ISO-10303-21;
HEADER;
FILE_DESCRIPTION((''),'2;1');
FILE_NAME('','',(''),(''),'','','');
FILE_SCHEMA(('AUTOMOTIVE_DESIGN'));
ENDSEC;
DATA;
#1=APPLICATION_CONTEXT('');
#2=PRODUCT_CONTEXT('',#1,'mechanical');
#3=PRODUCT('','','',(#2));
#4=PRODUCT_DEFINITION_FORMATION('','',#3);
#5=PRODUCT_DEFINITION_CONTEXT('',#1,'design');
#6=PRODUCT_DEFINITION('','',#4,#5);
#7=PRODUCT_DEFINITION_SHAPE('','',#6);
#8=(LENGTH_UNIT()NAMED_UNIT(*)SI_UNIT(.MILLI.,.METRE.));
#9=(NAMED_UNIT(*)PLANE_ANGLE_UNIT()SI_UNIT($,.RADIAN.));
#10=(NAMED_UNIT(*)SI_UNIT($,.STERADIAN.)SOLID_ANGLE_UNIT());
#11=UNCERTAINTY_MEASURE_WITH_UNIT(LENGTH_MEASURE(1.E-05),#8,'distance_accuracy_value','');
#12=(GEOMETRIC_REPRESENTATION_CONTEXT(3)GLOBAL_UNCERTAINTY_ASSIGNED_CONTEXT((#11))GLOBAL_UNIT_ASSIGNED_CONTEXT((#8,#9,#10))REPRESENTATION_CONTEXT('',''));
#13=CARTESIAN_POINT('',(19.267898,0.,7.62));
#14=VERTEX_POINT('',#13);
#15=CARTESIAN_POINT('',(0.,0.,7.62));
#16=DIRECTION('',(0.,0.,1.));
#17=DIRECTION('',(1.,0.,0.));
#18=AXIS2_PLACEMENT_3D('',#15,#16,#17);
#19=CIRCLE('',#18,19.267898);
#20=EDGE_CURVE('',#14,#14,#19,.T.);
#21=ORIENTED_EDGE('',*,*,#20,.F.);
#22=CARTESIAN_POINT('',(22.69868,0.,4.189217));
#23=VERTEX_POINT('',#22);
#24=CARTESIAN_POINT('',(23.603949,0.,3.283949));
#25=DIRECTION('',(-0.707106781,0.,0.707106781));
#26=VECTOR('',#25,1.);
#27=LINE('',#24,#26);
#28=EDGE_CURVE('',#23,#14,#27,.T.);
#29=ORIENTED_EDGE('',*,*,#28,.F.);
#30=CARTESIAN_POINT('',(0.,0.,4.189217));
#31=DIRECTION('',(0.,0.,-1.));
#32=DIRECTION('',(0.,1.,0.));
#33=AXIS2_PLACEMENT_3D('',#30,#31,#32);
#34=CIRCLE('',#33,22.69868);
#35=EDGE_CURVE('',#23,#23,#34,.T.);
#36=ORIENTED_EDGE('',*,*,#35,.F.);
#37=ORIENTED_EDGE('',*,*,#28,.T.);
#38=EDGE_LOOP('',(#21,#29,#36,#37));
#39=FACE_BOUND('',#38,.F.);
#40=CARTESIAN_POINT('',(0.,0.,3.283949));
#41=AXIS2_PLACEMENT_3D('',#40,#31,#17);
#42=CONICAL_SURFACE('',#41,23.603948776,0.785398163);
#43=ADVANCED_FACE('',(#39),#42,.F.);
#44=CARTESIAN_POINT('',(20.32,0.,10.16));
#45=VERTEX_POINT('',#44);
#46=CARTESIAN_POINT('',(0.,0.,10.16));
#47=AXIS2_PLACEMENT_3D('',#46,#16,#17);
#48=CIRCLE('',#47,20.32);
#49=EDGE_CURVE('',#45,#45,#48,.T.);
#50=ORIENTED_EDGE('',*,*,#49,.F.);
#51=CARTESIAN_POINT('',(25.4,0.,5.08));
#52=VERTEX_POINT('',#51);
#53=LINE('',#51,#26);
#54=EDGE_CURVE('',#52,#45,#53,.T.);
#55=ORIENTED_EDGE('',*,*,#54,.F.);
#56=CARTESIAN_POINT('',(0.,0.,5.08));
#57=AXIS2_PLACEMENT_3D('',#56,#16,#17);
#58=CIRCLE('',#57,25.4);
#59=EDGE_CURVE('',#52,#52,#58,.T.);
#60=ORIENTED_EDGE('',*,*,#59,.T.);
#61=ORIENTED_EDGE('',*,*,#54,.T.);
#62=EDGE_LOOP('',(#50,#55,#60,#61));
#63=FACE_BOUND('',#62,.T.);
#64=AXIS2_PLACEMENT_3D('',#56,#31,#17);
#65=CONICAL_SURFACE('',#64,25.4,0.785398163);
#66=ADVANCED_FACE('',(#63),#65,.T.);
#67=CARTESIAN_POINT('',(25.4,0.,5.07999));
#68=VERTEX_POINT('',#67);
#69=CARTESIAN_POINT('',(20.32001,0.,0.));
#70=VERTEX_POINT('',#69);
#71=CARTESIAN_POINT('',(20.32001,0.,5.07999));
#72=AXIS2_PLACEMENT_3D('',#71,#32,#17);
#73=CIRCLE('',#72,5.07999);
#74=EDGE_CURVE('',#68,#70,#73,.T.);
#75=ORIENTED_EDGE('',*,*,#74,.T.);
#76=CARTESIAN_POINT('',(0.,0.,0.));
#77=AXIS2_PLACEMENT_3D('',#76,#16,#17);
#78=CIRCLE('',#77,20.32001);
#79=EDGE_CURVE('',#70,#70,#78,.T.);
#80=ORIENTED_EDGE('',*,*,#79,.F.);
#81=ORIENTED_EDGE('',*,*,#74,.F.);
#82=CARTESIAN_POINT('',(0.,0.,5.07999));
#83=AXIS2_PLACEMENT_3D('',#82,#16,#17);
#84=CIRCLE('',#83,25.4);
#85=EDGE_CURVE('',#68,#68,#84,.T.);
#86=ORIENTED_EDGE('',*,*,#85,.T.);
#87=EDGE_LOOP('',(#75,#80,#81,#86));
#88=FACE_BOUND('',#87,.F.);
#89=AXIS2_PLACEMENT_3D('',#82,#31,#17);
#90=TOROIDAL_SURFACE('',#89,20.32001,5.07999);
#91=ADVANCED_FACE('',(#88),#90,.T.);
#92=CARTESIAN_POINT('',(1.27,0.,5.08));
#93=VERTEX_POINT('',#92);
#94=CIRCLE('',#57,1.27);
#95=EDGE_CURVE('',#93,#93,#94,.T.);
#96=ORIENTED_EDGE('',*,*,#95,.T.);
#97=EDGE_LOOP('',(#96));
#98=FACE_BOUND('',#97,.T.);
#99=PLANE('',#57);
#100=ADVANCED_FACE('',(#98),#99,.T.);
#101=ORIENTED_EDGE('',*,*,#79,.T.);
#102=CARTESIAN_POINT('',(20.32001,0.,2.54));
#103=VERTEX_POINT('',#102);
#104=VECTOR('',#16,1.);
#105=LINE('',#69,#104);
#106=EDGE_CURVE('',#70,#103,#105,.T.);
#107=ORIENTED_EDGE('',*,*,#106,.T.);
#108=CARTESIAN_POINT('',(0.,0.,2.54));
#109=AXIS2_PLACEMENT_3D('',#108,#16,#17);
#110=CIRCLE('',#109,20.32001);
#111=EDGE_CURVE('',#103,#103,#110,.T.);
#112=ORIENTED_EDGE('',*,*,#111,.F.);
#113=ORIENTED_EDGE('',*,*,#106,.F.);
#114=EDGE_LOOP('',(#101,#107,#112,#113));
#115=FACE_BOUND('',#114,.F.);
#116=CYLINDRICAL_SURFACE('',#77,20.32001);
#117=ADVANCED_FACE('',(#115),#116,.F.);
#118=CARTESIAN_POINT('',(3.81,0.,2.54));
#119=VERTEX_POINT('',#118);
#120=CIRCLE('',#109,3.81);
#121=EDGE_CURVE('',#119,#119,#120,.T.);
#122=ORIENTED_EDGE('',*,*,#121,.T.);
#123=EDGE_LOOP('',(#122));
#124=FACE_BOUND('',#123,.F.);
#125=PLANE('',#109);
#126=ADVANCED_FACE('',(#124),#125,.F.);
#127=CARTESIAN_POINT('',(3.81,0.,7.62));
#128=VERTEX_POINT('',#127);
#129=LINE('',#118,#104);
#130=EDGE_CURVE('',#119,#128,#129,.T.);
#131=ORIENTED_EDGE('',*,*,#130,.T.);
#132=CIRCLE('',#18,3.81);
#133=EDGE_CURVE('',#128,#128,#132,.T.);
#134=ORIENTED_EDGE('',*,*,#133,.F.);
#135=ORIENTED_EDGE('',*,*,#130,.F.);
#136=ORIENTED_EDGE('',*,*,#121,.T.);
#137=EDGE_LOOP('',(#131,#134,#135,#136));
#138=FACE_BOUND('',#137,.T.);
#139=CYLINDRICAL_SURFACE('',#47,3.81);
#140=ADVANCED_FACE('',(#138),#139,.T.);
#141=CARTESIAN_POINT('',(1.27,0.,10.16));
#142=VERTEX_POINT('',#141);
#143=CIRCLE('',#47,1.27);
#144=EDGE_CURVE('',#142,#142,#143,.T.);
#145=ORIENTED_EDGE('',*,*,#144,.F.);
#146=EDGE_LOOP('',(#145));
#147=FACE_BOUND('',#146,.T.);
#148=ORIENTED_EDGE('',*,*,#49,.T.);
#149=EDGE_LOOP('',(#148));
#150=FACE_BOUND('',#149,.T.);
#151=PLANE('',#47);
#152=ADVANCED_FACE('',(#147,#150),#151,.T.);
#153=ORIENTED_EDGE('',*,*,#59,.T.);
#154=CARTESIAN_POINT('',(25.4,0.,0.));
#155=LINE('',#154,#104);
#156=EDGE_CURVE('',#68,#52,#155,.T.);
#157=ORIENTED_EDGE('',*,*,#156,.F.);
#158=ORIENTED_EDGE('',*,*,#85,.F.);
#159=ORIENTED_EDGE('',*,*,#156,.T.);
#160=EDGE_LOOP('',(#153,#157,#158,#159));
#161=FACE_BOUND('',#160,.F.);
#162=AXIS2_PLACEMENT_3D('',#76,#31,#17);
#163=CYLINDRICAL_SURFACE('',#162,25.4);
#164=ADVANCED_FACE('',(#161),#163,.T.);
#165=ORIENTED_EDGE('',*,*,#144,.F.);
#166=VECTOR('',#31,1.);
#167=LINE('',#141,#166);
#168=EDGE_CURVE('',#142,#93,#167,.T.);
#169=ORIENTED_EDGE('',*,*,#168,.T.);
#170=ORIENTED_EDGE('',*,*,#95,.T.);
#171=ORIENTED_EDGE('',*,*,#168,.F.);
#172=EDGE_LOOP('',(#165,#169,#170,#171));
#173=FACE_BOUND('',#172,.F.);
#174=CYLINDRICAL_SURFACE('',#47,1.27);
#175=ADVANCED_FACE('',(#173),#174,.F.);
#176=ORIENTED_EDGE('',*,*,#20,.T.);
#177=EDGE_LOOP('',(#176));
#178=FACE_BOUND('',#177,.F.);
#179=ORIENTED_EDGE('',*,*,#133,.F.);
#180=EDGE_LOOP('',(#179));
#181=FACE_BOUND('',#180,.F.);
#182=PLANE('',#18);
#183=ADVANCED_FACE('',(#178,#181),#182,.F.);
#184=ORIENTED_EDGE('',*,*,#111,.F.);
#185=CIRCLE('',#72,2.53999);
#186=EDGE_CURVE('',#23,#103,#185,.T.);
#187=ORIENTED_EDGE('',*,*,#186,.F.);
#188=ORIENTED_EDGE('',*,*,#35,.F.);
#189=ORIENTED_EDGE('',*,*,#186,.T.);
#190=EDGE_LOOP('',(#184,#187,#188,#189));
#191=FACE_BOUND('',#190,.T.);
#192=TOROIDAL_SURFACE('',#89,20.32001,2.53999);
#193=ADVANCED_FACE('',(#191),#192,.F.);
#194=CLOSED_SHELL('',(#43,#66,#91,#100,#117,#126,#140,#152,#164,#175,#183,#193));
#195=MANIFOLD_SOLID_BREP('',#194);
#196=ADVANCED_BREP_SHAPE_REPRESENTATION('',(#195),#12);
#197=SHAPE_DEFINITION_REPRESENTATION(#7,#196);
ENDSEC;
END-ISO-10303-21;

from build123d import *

# Parameters (mm, degrees)
F0_R     = 25.4
F1_DEPTH = 10.16
F2_R     = 1.27
F3_DEPTH = 5.08
F4_SIZE  = 5.08
F5_R     = 5.07999
F6_T     = 2.54


# Not quite as in the source:
# - a fillet or chamfer is up to 0.001 mm smaller than in the source, because OpenCascade refuses the exact size
# - a shell that OpenCascade refuses in one call is made with other operations: the cavity is built on its own and cut out


with BuildPart() as f1:
    # F0 (on Top) → F1 (new body)
    with BuildSketch(Plane.XY):
        Circle(F0_R)
    extrude(amount=F1_DEPTH)

    # F2 (on face) → F3 (cut)
    with BuildSketch(Plane.XY.offset(10.16)):
        Circle(F2_R)
    extrude(amount=-F3_DEPTH, mode=Mode.SUBTRACT)

    # F4
    f4_edges = [f1.edges().sort_by_distance(p)[0] for p in [
        (-25.4, 0, 10.16),
    ]]
    chamfer(f4_edges, length=F4_SIZE)

    # F5 (radius 5.08 in the source; OpenCascade refuses exactly that, so slightly less here)
    f5_edges = [f1.edges().sort_by_distance(p)[0] for p in [
        (-25.4, 0, 0),
    ]]
    fillet(f5_edges, radius=F5_R)

    # F6: shell of thickness 2.54, made by hand


with BuildPart() as f6_core1:
    # F6_t2: copy of F1
    add(f1.part)

    # the walls: a layer under each face that stays
    f6_faces = [f6_core1.faces().sort_by_distance(p)[0] for p in [
        (-25.4, 0, 5.079995),
        (-23.9121053774, 0, 1.4878946226),
        (-22.86, 0, 7.62),
        (-13.5466666667, -13.5466666667, 10.16),
        (-1.27, 0, 7.62),
        (0, 0, 5.08),
    ]]
    thicken(f6_faces, amount=-F6_T, mode=Mode.SUBTRACT)

    # F6_s3 → F6_t4 (revolve, cut)
    with BuildSketch(Plane.XZ):
        Polygon((1.2446, 5.1054), (3.81, 5.08), (3.81, 2.54), (1.27, 2.54), align=None)
    revolve(axis=Axis((0, 0, 5.08), (0, 0, 1)), mode=Mode.SUBTRACT)


with BuildPart() as f1_1:
    add(f1.part)

    # what is left inside the walls is the cavity
    f6_cavity = [f6_core1.part.solids().sort_by_distance(p)[0] for p in [
        (0, -6.773337, 0.0254),
    ]]
    add(f6_cavity, mode=Mode.SUBTRACT)


solid = f1_1.part
